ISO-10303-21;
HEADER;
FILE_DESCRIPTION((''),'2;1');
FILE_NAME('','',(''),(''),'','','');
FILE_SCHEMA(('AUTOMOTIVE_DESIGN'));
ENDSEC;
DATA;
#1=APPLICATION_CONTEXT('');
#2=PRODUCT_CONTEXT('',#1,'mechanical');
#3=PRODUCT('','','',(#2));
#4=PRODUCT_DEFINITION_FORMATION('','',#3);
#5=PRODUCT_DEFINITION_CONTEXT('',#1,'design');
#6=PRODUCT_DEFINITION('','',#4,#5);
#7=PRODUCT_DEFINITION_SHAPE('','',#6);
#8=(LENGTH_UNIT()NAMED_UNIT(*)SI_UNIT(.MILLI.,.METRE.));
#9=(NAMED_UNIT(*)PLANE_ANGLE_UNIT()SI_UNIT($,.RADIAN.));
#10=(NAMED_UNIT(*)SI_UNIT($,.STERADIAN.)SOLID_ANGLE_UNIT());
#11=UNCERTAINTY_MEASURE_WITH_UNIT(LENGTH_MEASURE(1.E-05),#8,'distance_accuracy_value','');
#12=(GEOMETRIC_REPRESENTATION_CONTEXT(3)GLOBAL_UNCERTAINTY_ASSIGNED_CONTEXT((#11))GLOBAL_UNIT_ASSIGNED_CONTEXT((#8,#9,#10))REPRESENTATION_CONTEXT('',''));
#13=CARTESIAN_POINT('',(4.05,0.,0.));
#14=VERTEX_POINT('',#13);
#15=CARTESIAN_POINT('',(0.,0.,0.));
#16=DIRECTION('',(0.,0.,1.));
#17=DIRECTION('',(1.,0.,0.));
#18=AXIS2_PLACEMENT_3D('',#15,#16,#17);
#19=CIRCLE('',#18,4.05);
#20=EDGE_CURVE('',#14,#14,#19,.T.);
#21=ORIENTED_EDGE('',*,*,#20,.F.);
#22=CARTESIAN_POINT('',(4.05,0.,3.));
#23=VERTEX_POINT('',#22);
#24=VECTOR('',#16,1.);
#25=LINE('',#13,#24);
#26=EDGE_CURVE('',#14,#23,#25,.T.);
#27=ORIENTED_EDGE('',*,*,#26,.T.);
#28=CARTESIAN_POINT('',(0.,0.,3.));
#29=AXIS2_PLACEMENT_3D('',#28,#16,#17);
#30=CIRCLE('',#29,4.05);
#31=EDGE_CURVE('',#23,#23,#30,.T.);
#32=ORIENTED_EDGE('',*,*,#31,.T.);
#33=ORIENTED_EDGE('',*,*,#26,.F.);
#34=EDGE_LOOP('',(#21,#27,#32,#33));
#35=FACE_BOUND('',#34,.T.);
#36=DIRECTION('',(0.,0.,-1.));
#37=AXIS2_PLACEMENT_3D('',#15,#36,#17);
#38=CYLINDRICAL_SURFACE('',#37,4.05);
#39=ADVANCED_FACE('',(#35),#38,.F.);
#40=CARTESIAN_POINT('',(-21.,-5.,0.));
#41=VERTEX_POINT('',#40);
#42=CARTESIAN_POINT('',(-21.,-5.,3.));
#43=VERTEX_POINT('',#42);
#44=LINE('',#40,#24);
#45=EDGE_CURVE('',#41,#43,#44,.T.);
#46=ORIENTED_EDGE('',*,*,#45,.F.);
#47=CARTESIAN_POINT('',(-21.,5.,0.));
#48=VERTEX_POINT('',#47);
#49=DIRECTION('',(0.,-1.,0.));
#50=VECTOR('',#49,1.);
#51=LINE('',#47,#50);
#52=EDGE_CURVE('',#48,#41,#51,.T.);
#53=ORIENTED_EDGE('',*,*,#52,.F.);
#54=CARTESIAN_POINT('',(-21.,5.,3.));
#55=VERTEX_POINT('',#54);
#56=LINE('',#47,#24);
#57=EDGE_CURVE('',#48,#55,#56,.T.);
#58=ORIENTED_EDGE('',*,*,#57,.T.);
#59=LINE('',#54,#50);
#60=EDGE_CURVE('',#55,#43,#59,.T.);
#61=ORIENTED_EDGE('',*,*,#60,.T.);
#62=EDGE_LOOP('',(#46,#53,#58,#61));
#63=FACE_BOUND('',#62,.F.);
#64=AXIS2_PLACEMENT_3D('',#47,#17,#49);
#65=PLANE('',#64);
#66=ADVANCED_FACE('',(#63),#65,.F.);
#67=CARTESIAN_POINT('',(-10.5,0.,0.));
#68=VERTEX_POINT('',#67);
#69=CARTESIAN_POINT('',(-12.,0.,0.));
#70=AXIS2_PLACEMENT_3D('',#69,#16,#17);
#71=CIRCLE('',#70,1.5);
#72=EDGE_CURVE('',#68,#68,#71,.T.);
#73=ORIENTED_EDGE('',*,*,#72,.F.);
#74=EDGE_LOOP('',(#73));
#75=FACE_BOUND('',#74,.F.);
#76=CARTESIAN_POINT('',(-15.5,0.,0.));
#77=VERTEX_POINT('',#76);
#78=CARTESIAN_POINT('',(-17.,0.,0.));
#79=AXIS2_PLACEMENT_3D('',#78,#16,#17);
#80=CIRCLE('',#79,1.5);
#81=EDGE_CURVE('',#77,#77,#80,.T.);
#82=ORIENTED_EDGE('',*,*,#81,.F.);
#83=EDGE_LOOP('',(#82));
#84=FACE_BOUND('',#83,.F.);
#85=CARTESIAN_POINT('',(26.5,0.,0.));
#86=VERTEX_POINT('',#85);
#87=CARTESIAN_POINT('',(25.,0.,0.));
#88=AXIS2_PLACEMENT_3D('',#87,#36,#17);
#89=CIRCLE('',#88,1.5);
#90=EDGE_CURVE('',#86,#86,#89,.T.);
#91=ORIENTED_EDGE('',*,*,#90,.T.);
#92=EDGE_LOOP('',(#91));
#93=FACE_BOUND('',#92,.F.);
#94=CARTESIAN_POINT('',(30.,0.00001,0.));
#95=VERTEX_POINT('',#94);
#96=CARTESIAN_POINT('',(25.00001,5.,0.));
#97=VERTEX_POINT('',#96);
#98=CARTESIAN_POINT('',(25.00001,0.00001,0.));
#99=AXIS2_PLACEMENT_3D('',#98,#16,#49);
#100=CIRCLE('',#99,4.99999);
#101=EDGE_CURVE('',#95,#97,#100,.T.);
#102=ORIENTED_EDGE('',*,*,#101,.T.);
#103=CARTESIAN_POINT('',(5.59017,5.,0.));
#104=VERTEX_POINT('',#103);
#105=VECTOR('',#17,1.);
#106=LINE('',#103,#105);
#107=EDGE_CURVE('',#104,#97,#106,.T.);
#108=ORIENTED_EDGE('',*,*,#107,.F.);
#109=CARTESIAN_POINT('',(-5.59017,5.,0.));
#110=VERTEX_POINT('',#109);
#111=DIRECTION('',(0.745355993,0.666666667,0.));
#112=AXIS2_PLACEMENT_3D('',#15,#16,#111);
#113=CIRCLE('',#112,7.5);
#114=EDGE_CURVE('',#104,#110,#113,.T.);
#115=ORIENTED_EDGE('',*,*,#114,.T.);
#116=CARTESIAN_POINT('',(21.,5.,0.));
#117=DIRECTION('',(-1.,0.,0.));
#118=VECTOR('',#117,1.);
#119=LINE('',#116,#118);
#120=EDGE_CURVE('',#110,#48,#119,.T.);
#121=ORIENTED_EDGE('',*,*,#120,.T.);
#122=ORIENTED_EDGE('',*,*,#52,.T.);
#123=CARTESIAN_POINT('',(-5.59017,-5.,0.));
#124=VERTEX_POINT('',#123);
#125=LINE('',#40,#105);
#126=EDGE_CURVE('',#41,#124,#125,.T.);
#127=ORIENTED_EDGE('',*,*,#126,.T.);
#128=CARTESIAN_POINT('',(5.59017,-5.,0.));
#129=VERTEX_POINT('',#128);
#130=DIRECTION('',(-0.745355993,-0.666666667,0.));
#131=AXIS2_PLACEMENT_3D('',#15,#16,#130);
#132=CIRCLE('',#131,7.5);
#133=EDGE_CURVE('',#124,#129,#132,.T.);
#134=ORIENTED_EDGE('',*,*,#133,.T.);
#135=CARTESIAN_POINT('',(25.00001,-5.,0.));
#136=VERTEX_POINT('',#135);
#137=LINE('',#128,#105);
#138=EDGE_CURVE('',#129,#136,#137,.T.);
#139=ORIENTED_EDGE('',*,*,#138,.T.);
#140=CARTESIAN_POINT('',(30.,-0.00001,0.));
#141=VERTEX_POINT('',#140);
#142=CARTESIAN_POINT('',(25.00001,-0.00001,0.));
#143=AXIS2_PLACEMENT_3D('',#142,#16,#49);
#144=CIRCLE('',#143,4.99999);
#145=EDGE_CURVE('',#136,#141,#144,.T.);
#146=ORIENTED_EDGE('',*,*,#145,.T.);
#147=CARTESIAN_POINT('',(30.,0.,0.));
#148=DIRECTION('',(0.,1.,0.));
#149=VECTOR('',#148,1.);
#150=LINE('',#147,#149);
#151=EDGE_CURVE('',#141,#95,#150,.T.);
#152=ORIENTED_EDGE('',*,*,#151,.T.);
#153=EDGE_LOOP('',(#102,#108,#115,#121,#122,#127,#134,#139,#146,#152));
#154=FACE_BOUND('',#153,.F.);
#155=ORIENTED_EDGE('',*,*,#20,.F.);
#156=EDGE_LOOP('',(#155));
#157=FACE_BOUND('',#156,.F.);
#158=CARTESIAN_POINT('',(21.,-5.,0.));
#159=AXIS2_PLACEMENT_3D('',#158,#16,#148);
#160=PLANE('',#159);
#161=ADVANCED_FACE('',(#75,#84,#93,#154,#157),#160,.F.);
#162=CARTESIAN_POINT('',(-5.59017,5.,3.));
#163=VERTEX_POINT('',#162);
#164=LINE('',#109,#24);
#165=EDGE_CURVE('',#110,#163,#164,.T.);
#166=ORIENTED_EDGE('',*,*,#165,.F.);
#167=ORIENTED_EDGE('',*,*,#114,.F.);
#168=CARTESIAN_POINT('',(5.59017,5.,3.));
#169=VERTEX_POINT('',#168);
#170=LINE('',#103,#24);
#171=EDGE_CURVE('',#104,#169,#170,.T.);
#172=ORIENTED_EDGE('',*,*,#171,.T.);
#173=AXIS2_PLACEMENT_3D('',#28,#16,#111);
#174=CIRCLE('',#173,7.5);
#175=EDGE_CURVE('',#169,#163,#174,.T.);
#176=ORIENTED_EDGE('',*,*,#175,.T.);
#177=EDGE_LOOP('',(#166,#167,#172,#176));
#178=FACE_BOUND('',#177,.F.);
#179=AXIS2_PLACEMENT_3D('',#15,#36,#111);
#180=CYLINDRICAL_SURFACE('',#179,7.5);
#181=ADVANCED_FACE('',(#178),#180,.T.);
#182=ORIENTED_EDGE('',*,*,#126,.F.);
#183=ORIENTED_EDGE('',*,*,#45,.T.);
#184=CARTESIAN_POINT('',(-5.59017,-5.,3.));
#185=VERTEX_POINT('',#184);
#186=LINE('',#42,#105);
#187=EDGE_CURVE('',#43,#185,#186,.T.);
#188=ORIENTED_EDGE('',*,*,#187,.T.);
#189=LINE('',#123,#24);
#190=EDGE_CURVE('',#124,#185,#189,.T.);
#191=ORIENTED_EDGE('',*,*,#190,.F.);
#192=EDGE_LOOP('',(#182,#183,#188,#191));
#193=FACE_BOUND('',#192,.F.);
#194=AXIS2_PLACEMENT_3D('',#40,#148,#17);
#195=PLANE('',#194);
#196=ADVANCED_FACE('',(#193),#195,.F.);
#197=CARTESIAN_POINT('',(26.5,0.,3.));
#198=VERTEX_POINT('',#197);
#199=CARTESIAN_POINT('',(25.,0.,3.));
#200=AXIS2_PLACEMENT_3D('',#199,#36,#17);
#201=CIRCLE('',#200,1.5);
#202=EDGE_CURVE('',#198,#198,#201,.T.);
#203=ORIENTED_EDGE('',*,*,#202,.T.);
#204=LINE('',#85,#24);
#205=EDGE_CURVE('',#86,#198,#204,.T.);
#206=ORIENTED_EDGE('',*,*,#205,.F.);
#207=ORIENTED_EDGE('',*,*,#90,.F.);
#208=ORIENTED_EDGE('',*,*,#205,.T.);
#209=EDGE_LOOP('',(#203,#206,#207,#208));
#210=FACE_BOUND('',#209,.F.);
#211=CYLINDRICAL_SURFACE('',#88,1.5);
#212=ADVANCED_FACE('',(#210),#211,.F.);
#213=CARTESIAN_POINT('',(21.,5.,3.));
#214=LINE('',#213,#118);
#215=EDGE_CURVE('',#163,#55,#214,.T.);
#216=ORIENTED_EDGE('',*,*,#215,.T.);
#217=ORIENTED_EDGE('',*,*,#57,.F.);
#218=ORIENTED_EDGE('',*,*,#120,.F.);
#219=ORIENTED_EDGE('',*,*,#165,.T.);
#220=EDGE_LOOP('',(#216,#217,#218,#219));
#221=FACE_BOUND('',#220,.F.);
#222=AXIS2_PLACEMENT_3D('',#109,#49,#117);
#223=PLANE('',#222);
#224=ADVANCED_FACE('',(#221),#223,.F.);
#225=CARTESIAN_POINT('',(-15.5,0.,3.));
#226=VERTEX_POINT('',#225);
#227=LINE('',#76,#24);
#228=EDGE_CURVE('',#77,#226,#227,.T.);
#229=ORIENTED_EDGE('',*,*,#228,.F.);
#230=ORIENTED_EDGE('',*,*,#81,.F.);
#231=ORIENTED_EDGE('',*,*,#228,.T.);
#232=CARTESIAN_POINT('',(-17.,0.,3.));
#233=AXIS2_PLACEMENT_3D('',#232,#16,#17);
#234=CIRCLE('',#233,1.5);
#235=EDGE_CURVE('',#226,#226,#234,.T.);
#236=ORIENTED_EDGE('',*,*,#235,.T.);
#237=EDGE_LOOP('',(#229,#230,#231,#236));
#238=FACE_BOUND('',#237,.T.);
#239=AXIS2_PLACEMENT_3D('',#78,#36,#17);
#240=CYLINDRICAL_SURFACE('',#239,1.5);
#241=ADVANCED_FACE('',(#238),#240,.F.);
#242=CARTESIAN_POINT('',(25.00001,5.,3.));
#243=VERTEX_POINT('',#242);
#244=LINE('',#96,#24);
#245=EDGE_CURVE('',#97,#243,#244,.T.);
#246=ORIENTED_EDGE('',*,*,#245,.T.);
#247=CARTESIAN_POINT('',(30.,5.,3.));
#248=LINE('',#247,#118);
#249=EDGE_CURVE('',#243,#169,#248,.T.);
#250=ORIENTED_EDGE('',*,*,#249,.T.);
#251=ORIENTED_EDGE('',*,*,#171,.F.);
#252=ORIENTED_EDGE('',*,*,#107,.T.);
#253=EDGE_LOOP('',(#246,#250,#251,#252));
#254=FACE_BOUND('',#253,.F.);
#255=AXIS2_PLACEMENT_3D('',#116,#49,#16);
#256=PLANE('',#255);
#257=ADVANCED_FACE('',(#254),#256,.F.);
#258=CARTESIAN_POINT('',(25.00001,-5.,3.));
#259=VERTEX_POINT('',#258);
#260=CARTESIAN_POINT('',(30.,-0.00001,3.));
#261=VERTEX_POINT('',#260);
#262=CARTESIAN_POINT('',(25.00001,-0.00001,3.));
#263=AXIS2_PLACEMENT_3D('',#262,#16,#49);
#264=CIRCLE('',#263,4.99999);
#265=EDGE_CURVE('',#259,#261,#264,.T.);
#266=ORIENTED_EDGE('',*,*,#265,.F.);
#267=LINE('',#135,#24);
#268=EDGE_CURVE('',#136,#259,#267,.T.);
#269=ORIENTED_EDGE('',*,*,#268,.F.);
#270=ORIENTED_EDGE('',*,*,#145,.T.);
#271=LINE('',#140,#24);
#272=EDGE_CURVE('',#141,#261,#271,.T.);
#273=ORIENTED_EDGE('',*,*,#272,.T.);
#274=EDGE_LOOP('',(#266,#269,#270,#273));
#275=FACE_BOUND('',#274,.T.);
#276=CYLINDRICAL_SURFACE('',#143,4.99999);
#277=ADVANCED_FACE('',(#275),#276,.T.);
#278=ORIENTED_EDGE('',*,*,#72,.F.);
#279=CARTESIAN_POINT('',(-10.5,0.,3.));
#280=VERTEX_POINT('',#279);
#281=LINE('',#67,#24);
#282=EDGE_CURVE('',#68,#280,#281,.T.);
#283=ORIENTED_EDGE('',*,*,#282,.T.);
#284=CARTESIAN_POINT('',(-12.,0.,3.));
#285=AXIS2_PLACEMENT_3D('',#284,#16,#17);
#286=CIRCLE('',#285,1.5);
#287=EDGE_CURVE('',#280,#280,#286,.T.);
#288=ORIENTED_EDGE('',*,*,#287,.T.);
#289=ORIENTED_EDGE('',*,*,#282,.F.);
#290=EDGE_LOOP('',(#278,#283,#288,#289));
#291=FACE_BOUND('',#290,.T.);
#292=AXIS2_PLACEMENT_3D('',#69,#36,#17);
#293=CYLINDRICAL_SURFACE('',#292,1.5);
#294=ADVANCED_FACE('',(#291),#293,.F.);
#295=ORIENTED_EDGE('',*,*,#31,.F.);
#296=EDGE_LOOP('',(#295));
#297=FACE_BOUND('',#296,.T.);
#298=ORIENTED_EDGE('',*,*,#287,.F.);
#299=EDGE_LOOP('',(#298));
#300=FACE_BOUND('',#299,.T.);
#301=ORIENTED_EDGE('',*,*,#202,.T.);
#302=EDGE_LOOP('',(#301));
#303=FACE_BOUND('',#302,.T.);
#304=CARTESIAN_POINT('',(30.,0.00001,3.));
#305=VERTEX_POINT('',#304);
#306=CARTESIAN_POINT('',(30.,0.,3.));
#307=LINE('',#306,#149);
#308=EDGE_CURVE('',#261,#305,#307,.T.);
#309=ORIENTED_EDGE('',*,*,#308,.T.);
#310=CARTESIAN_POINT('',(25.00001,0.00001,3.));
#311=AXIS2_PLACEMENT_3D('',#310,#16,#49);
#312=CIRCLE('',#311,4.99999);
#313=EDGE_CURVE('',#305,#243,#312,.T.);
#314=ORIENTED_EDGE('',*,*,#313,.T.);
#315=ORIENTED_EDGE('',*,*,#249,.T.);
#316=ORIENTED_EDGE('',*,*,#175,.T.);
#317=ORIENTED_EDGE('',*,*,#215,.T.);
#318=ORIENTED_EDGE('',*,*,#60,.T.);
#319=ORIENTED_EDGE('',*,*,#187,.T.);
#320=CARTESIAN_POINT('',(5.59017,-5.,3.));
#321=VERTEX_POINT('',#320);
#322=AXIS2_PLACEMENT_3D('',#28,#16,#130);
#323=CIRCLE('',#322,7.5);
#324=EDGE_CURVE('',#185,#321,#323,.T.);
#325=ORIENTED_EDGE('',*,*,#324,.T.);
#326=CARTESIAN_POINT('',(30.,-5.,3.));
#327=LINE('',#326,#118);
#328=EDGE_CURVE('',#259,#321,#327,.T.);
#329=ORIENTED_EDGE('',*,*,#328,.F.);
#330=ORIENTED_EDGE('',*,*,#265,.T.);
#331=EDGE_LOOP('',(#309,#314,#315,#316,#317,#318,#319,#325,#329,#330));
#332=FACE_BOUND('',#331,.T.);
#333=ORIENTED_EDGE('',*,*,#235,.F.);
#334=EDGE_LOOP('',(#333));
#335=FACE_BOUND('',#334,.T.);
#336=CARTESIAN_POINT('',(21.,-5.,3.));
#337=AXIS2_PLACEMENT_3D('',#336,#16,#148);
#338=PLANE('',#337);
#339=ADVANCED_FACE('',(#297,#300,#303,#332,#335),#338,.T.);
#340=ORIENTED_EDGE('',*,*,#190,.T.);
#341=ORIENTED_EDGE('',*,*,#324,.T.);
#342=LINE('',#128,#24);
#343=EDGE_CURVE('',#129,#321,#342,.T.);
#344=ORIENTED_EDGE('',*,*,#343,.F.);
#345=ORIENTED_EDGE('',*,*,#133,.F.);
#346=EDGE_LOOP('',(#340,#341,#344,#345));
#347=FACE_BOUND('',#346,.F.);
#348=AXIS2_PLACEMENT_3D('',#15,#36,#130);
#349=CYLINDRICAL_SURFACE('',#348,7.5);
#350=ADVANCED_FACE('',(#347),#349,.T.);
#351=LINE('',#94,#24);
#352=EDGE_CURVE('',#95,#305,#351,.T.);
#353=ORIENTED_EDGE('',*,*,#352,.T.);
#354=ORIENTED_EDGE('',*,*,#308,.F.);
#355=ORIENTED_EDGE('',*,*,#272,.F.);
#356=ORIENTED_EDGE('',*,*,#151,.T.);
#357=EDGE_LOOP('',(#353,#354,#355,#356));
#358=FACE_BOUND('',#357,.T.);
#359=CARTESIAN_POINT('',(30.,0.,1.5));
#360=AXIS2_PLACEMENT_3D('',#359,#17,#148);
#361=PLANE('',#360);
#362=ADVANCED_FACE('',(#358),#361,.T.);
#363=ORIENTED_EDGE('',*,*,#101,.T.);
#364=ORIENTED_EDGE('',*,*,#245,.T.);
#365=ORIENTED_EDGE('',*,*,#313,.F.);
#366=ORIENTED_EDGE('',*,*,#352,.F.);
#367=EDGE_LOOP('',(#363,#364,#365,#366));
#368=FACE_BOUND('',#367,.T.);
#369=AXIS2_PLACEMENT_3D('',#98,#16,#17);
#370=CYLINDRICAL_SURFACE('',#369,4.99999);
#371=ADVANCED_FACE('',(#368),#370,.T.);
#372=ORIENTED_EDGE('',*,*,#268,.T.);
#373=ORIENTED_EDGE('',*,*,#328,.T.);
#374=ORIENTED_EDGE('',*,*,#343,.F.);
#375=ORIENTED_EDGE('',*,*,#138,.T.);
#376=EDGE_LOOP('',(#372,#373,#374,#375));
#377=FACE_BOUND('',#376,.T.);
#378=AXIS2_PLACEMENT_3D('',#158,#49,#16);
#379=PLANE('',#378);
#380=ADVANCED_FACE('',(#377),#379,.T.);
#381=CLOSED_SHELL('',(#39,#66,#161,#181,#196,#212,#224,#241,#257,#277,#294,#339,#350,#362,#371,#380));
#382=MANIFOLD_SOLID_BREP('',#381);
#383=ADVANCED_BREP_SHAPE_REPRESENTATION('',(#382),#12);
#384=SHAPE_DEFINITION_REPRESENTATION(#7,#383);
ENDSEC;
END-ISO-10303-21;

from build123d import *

# Parameters (mm, degrees)
F0_R     = 1.5
F0_R_2   = 4.05
F1_DEPTH = 3
F2_W     = 10
F2_H     = 3
F3_DEPTH = 9
F4_R     = 1.5
F5_DEPTH = 25
F6_R     = 4.99999


# Not quite as in the source:
# - a fillet or chamfer is up to 0.001 mm smaller than in the source, because OpenCascade refuses the exact size


with BuildPart() as f1:
    # F0 (on Top) → F1 (new body)
    with BuildSketch(Plane.XY):
        Polygon((21, -5), (21, 5), (5.5901699437, 5), (-5.5901699437, 5), (-21, 5), (-21, -5), (-5.5901699437, -5), (5.5901699437, -5), align=None)
        with Locations((-17, 0)):
            Circle(F0_R, mode=Mode.SUBTRACT)
        with Locations((-12, 0)):
            Circle(F0_R, mode=Mode.SUBTRACT)
        Circle(F0_R_2, mode=Mode.SUBTRACT)
        with BuildLine():
            Line((-5.5901699437, 5), (5.5901699437, 5))
            ThreePointArc((5.5901699437, 5), (0, 7.5), (-5.5901699437, 5))
        make_face()
        with BuildLine():
            ThreePointArc((-5.5901699437, -5), (0, -7.5), (5.5901699437, -5))
            Line((5.5901699437, -5), (-5.5901699437, -5))
        make_face()
    extrude(amount=F1_DEPTH)

    # F2 (on face) → F3 (join)
    with BuildSketch(Plane.YZ.offset(21)):
        with Locations((0, 1.5)):
            Rectangle(F2_W, F2_H)
    extrude(amount=F3_DEPTH)

    # F4 (on face) → F5 (cut)
    with BuildSketch(Plane(origin=(0, 0, 0), x_dir=(1, 0, 0), z_dir=(0, 0, -1))):
        with Locations((25, 0)):
            Circle(F4_R)
    extrude(amount=-F5_DEPTH, mode=Mode.SUBTRACT)

    # F6 (radius 5 in the source; OpenCascade refuses exactly that, so slightly less here)
    f6_edges = [f1.edges().sort_by_distance(p)[0] for p in [
        (30, -5, 1.5),
        (30, 5, 1.5),
    ]]
    fillet(f6_edges, radius=F6_R)


solid = f1.part
